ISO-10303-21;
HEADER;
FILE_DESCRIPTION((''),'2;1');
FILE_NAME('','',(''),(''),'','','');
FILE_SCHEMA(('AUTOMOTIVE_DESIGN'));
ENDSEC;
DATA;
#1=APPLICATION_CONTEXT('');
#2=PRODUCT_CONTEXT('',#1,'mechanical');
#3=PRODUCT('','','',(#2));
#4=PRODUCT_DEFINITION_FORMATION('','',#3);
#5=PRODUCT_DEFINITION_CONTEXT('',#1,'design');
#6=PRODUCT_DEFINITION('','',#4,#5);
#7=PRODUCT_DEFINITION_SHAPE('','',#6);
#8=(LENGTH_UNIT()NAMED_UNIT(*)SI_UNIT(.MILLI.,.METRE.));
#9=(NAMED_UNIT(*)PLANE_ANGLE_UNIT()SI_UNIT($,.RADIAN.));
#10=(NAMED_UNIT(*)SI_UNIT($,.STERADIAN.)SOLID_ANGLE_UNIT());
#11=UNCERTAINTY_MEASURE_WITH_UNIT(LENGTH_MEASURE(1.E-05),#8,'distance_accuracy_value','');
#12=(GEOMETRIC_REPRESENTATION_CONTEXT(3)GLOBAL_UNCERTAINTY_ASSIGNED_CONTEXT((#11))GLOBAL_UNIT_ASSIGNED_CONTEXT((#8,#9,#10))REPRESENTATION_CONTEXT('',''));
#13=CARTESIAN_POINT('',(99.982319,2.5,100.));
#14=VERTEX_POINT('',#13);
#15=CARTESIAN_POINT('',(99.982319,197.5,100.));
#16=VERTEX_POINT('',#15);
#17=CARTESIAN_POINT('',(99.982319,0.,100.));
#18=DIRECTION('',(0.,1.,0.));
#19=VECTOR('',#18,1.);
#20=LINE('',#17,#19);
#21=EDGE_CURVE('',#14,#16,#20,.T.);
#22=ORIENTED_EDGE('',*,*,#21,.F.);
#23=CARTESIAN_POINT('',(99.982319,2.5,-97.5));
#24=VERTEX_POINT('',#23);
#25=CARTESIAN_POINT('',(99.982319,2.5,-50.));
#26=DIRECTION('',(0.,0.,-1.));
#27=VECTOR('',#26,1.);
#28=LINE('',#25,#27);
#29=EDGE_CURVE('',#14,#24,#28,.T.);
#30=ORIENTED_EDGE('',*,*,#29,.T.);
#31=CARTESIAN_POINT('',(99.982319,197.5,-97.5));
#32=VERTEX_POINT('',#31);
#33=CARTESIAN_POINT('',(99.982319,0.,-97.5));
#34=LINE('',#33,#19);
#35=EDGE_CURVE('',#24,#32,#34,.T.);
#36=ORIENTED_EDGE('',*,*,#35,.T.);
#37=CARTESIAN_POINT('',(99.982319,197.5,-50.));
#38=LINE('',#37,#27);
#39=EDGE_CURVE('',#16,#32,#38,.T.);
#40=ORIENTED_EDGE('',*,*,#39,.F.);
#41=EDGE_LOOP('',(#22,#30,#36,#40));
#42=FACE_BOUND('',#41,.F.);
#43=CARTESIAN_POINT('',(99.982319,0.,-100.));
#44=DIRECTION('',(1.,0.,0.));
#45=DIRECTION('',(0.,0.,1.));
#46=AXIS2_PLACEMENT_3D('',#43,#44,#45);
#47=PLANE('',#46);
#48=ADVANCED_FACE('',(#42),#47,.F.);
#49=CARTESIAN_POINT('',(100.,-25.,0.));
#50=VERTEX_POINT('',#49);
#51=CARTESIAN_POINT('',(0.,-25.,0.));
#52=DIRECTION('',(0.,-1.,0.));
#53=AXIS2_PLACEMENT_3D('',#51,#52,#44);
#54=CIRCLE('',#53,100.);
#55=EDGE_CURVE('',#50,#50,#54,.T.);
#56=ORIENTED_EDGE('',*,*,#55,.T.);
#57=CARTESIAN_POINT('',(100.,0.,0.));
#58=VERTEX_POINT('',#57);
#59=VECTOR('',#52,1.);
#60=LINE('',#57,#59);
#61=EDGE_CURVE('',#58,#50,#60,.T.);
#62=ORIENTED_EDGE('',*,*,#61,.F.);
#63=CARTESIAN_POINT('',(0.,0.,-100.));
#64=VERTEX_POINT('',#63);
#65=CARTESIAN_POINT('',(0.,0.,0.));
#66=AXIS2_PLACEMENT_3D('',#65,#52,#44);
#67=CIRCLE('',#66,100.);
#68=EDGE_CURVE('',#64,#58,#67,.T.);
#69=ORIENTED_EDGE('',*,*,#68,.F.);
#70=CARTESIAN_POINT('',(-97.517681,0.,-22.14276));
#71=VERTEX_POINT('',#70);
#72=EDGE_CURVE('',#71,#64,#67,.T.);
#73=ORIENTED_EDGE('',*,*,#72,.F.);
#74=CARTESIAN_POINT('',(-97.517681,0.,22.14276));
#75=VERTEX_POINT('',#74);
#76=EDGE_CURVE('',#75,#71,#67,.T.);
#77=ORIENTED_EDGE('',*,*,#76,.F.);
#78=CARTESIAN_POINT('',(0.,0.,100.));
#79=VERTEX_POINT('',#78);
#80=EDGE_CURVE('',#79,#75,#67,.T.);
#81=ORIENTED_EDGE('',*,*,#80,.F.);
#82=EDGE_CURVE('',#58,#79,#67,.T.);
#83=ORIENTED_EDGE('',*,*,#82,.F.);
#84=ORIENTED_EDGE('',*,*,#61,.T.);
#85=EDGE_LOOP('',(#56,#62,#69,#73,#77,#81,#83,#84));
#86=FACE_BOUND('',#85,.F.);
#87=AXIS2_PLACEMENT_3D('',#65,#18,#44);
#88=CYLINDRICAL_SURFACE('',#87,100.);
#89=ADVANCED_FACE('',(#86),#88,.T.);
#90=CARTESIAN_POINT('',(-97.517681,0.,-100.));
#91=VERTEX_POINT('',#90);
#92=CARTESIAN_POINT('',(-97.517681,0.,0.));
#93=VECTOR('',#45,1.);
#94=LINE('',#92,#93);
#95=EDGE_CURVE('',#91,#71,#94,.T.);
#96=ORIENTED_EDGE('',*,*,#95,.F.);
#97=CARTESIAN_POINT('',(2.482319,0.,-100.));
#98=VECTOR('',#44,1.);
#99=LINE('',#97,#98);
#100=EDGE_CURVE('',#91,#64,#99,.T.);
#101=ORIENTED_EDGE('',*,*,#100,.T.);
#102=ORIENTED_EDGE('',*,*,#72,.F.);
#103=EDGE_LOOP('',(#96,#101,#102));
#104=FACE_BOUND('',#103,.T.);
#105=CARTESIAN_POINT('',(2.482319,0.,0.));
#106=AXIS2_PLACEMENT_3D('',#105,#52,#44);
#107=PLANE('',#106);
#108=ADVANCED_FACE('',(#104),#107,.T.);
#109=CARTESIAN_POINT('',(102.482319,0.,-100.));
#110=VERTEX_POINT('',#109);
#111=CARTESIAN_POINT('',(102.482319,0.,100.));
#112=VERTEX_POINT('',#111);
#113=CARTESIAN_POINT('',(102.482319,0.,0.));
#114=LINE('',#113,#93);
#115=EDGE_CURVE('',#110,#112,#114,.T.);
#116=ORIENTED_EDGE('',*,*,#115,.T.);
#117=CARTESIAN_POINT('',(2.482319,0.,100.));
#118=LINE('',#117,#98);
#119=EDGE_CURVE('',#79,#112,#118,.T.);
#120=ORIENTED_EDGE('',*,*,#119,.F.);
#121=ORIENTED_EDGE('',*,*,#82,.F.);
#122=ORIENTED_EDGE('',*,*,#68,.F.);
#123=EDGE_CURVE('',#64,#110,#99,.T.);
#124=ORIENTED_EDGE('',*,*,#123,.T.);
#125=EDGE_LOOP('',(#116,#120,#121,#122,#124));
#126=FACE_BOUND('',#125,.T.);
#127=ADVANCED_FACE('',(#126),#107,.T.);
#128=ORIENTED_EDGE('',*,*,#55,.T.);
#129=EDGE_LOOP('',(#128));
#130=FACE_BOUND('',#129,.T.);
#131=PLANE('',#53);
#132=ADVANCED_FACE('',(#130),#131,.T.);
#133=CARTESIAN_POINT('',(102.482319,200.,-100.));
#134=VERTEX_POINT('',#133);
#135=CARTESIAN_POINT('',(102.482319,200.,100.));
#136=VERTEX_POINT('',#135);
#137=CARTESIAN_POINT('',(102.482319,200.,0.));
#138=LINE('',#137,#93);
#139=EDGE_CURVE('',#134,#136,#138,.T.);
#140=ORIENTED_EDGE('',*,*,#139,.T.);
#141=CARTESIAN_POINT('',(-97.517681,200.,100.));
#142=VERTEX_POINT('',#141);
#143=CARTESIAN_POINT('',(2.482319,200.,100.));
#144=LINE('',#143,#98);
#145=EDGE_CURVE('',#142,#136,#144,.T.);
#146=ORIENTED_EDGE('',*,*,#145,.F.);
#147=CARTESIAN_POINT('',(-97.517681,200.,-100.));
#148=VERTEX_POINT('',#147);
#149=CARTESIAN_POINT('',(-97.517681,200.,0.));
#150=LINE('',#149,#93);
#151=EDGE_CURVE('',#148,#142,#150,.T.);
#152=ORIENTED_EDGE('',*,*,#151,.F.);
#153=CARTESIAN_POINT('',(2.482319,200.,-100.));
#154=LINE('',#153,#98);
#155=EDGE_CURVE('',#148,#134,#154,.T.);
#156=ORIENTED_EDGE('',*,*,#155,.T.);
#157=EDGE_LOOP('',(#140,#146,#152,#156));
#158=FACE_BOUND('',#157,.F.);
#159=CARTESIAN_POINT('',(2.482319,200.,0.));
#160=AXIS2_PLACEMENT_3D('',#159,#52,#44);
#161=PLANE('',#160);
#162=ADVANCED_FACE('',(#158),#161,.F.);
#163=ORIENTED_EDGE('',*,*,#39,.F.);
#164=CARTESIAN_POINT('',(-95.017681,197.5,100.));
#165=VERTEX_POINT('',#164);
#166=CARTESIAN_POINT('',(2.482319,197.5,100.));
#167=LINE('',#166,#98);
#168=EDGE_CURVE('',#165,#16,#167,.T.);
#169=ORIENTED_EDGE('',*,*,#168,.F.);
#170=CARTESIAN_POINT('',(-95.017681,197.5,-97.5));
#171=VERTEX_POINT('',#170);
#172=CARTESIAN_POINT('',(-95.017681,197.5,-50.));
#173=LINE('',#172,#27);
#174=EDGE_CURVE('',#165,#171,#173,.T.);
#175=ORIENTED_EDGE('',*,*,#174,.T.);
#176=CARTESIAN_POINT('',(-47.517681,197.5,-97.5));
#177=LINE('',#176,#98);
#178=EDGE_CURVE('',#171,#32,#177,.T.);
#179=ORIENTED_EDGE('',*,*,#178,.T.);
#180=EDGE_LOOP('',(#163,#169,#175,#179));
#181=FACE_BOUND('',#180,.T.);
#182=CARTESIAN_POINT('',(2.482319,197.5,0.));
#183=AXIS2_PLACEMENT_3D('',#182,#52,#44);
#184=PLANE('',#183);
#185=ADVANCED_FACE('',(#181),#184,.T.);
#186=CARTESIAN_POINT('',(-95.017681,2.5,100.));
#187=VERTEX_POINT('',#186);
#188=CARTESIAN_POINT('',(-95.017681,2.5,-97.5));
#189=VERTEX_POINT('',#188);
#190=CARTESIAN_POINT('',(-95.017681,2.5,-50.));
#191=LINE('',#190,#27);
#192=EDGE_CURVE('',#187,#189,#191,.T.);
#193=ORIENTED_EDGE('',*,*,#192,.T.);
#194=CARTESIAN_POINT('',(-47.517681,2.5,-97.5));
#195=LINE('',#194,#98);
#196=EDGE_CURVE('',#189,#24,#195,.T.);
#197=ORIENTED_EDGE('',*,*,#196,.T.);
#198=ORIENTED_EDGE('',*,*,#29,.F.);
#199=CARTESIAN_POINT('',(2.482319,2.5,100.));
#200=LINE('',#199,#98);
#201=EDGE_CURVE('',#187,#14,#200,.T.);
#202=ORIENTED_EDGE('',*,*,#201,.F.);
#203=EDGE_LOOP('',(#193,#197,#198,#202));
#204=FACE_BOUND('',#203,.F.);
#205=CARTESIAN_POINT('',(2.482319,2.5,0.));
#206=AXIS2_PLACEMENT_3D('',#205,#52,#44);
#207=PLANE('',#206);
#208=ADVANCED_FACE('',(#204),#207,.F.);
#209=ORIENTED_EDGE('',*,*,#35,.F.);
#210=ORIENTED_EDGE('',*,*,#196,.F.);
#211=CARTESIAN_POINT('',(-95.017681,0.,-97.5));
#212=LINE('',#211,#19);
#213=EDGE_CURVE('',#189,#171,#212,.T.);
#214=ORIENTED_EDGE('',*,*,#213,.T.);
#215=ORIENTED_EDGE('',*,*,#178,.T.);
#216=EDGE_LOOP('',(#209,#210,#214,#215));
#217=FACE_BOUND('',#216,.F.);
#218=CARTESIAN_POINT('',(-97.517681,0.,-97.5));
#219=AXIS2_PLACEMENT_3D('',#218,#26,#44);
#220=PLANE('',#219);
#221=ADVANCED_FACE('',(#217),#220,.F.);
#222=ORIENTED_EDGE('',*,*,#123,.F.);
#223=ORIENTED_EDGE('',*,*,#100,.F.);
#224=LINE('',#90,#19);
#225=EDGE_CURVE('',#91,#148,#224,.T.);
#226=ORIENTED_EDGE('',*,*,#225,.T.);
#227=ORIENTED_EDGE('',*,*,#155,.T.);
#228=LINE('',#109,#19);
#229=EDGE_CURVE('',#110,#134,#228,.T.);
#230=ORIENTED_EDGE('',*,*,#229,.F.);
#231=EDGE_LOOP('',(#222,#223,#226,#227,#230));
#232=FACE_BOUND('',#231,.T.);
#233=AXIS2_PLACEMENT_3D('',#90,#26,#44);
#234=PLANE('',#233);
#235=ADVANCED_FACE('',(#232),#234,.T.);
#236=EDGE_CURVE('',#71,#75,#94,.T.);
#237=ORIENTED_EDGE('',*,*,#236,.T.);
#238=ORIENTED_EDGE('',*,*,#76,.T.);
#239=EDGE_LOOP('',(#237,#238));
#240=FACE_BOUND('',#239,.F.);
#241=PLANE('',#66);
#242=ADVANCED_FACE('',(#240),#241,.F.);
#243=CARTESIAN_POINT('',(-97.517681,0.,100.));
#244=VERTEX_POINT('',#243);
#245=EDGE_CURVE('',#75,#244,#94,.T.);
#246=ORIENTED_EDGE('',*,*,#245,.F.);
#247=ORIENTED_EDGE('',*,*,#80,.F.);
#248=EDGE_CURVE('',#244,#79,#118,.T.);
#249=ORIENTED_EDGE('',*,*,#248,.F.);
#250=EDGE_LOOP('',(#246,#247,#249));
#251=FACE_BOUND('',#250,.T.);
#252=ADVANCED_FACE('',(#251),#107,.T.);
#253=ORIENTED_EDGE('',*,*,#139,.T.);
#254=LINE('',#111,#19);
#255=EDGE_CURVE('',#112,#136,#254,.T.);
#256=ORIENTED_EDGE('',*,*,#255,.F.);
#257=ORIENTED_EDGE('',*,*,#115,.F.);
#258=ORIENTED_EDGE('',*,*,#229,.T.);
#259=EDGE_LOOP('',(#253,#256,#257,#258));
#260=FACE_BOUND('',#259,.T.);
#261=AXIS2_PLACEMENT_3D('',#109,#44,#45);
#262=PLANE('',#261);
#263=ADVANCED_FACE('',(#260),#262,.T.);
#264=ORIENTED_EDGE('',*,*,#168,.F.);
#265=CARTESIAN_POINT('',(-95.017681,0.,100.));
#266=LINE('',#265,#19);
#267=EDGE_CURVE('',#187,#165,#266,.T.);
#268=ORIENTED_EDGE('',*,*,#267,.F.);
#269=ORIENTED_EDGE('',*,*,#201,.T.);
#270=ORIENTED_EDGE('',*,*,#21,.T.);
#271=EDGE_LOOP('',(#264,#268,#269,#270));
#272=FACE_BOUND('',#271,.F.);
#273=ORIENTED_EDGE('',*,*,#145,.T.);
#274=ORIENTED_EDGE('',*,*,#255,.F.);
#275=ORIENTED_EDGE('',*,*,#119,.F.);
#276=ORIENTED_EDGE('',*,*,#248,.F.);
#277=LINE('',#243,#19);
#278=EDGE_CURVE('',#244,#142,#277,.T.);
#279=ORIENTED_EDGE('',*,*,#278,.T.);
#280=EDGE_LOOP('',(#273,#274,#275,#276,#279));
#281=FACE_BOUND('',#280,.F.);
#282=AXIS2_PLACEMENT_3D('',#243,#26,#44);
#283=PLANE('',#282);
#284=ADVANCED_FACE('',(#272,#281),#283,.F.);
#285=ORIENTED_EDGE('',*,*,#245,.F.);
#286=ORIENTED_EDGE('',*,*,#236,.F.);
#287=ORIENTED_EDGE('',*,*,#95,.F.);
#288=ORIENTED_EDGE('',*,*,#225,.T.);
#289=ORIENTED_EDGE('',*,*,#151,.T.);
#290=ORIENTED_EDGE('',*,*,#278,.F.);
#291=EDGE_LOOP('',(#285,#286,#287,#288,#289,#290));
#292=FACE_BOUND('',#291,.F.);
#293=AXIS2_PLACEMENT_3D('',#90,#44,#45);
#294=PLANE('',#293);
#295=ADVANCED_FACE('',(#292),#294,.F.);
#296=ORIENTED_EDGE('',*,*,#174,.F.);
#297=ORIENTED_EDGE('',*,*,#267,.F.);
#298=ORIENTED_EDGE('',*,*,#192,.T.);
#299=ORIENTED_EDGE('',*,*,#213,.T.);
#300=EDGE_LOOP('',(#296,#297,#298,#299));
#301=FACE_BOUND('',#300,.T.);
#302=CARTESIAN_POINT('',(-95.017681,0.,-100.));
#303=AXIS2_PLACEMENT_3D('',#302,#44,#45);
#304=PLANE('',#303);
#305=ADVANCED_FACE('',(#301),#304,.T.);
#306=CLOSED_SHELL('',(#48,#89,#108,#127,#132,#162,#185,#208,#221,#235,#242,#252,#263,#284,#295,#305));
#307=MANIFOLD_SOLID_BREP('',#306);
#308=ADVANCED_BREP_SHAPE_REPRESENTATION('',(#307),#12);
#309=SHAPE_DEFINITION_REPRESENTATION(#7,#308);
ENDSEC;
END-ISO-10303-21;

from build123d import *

# Parameters (mm, degrees)
F0_W     = 200
F0_H     = 200
F1_DEPTH = 200
F4_T     = -2.5
F5_R     = 100
F6_DEPTH = 25


# Not quite as in the source:
# - the program builds the solid bodies; features that only make, move or delete a surface that nothing else refers to are left out


with BuildPart() as f1:
    # F0 (on Front) → F1 (new body)
    with BuildSketch(Plane.XZ):
        with Locations((2.4823185522, 0)):
            Rectangle(F0_W, F0_H)
    extrude(amount=-F1_DEPTH)

    # F4
    f4_openings = [f1.faces().sort_by_distance(p)[0] for p in [
        (2.482319, 100, 100),
    ]]
    offset(amount=F4_T, openings=f4_openings)

    # F5 (on face) → F6 (join)
    with BuildSketch(Plane.XZ):
        Circle(F5_R)
    extrude(amount=F6_DEPTH)


solid = f1.part
